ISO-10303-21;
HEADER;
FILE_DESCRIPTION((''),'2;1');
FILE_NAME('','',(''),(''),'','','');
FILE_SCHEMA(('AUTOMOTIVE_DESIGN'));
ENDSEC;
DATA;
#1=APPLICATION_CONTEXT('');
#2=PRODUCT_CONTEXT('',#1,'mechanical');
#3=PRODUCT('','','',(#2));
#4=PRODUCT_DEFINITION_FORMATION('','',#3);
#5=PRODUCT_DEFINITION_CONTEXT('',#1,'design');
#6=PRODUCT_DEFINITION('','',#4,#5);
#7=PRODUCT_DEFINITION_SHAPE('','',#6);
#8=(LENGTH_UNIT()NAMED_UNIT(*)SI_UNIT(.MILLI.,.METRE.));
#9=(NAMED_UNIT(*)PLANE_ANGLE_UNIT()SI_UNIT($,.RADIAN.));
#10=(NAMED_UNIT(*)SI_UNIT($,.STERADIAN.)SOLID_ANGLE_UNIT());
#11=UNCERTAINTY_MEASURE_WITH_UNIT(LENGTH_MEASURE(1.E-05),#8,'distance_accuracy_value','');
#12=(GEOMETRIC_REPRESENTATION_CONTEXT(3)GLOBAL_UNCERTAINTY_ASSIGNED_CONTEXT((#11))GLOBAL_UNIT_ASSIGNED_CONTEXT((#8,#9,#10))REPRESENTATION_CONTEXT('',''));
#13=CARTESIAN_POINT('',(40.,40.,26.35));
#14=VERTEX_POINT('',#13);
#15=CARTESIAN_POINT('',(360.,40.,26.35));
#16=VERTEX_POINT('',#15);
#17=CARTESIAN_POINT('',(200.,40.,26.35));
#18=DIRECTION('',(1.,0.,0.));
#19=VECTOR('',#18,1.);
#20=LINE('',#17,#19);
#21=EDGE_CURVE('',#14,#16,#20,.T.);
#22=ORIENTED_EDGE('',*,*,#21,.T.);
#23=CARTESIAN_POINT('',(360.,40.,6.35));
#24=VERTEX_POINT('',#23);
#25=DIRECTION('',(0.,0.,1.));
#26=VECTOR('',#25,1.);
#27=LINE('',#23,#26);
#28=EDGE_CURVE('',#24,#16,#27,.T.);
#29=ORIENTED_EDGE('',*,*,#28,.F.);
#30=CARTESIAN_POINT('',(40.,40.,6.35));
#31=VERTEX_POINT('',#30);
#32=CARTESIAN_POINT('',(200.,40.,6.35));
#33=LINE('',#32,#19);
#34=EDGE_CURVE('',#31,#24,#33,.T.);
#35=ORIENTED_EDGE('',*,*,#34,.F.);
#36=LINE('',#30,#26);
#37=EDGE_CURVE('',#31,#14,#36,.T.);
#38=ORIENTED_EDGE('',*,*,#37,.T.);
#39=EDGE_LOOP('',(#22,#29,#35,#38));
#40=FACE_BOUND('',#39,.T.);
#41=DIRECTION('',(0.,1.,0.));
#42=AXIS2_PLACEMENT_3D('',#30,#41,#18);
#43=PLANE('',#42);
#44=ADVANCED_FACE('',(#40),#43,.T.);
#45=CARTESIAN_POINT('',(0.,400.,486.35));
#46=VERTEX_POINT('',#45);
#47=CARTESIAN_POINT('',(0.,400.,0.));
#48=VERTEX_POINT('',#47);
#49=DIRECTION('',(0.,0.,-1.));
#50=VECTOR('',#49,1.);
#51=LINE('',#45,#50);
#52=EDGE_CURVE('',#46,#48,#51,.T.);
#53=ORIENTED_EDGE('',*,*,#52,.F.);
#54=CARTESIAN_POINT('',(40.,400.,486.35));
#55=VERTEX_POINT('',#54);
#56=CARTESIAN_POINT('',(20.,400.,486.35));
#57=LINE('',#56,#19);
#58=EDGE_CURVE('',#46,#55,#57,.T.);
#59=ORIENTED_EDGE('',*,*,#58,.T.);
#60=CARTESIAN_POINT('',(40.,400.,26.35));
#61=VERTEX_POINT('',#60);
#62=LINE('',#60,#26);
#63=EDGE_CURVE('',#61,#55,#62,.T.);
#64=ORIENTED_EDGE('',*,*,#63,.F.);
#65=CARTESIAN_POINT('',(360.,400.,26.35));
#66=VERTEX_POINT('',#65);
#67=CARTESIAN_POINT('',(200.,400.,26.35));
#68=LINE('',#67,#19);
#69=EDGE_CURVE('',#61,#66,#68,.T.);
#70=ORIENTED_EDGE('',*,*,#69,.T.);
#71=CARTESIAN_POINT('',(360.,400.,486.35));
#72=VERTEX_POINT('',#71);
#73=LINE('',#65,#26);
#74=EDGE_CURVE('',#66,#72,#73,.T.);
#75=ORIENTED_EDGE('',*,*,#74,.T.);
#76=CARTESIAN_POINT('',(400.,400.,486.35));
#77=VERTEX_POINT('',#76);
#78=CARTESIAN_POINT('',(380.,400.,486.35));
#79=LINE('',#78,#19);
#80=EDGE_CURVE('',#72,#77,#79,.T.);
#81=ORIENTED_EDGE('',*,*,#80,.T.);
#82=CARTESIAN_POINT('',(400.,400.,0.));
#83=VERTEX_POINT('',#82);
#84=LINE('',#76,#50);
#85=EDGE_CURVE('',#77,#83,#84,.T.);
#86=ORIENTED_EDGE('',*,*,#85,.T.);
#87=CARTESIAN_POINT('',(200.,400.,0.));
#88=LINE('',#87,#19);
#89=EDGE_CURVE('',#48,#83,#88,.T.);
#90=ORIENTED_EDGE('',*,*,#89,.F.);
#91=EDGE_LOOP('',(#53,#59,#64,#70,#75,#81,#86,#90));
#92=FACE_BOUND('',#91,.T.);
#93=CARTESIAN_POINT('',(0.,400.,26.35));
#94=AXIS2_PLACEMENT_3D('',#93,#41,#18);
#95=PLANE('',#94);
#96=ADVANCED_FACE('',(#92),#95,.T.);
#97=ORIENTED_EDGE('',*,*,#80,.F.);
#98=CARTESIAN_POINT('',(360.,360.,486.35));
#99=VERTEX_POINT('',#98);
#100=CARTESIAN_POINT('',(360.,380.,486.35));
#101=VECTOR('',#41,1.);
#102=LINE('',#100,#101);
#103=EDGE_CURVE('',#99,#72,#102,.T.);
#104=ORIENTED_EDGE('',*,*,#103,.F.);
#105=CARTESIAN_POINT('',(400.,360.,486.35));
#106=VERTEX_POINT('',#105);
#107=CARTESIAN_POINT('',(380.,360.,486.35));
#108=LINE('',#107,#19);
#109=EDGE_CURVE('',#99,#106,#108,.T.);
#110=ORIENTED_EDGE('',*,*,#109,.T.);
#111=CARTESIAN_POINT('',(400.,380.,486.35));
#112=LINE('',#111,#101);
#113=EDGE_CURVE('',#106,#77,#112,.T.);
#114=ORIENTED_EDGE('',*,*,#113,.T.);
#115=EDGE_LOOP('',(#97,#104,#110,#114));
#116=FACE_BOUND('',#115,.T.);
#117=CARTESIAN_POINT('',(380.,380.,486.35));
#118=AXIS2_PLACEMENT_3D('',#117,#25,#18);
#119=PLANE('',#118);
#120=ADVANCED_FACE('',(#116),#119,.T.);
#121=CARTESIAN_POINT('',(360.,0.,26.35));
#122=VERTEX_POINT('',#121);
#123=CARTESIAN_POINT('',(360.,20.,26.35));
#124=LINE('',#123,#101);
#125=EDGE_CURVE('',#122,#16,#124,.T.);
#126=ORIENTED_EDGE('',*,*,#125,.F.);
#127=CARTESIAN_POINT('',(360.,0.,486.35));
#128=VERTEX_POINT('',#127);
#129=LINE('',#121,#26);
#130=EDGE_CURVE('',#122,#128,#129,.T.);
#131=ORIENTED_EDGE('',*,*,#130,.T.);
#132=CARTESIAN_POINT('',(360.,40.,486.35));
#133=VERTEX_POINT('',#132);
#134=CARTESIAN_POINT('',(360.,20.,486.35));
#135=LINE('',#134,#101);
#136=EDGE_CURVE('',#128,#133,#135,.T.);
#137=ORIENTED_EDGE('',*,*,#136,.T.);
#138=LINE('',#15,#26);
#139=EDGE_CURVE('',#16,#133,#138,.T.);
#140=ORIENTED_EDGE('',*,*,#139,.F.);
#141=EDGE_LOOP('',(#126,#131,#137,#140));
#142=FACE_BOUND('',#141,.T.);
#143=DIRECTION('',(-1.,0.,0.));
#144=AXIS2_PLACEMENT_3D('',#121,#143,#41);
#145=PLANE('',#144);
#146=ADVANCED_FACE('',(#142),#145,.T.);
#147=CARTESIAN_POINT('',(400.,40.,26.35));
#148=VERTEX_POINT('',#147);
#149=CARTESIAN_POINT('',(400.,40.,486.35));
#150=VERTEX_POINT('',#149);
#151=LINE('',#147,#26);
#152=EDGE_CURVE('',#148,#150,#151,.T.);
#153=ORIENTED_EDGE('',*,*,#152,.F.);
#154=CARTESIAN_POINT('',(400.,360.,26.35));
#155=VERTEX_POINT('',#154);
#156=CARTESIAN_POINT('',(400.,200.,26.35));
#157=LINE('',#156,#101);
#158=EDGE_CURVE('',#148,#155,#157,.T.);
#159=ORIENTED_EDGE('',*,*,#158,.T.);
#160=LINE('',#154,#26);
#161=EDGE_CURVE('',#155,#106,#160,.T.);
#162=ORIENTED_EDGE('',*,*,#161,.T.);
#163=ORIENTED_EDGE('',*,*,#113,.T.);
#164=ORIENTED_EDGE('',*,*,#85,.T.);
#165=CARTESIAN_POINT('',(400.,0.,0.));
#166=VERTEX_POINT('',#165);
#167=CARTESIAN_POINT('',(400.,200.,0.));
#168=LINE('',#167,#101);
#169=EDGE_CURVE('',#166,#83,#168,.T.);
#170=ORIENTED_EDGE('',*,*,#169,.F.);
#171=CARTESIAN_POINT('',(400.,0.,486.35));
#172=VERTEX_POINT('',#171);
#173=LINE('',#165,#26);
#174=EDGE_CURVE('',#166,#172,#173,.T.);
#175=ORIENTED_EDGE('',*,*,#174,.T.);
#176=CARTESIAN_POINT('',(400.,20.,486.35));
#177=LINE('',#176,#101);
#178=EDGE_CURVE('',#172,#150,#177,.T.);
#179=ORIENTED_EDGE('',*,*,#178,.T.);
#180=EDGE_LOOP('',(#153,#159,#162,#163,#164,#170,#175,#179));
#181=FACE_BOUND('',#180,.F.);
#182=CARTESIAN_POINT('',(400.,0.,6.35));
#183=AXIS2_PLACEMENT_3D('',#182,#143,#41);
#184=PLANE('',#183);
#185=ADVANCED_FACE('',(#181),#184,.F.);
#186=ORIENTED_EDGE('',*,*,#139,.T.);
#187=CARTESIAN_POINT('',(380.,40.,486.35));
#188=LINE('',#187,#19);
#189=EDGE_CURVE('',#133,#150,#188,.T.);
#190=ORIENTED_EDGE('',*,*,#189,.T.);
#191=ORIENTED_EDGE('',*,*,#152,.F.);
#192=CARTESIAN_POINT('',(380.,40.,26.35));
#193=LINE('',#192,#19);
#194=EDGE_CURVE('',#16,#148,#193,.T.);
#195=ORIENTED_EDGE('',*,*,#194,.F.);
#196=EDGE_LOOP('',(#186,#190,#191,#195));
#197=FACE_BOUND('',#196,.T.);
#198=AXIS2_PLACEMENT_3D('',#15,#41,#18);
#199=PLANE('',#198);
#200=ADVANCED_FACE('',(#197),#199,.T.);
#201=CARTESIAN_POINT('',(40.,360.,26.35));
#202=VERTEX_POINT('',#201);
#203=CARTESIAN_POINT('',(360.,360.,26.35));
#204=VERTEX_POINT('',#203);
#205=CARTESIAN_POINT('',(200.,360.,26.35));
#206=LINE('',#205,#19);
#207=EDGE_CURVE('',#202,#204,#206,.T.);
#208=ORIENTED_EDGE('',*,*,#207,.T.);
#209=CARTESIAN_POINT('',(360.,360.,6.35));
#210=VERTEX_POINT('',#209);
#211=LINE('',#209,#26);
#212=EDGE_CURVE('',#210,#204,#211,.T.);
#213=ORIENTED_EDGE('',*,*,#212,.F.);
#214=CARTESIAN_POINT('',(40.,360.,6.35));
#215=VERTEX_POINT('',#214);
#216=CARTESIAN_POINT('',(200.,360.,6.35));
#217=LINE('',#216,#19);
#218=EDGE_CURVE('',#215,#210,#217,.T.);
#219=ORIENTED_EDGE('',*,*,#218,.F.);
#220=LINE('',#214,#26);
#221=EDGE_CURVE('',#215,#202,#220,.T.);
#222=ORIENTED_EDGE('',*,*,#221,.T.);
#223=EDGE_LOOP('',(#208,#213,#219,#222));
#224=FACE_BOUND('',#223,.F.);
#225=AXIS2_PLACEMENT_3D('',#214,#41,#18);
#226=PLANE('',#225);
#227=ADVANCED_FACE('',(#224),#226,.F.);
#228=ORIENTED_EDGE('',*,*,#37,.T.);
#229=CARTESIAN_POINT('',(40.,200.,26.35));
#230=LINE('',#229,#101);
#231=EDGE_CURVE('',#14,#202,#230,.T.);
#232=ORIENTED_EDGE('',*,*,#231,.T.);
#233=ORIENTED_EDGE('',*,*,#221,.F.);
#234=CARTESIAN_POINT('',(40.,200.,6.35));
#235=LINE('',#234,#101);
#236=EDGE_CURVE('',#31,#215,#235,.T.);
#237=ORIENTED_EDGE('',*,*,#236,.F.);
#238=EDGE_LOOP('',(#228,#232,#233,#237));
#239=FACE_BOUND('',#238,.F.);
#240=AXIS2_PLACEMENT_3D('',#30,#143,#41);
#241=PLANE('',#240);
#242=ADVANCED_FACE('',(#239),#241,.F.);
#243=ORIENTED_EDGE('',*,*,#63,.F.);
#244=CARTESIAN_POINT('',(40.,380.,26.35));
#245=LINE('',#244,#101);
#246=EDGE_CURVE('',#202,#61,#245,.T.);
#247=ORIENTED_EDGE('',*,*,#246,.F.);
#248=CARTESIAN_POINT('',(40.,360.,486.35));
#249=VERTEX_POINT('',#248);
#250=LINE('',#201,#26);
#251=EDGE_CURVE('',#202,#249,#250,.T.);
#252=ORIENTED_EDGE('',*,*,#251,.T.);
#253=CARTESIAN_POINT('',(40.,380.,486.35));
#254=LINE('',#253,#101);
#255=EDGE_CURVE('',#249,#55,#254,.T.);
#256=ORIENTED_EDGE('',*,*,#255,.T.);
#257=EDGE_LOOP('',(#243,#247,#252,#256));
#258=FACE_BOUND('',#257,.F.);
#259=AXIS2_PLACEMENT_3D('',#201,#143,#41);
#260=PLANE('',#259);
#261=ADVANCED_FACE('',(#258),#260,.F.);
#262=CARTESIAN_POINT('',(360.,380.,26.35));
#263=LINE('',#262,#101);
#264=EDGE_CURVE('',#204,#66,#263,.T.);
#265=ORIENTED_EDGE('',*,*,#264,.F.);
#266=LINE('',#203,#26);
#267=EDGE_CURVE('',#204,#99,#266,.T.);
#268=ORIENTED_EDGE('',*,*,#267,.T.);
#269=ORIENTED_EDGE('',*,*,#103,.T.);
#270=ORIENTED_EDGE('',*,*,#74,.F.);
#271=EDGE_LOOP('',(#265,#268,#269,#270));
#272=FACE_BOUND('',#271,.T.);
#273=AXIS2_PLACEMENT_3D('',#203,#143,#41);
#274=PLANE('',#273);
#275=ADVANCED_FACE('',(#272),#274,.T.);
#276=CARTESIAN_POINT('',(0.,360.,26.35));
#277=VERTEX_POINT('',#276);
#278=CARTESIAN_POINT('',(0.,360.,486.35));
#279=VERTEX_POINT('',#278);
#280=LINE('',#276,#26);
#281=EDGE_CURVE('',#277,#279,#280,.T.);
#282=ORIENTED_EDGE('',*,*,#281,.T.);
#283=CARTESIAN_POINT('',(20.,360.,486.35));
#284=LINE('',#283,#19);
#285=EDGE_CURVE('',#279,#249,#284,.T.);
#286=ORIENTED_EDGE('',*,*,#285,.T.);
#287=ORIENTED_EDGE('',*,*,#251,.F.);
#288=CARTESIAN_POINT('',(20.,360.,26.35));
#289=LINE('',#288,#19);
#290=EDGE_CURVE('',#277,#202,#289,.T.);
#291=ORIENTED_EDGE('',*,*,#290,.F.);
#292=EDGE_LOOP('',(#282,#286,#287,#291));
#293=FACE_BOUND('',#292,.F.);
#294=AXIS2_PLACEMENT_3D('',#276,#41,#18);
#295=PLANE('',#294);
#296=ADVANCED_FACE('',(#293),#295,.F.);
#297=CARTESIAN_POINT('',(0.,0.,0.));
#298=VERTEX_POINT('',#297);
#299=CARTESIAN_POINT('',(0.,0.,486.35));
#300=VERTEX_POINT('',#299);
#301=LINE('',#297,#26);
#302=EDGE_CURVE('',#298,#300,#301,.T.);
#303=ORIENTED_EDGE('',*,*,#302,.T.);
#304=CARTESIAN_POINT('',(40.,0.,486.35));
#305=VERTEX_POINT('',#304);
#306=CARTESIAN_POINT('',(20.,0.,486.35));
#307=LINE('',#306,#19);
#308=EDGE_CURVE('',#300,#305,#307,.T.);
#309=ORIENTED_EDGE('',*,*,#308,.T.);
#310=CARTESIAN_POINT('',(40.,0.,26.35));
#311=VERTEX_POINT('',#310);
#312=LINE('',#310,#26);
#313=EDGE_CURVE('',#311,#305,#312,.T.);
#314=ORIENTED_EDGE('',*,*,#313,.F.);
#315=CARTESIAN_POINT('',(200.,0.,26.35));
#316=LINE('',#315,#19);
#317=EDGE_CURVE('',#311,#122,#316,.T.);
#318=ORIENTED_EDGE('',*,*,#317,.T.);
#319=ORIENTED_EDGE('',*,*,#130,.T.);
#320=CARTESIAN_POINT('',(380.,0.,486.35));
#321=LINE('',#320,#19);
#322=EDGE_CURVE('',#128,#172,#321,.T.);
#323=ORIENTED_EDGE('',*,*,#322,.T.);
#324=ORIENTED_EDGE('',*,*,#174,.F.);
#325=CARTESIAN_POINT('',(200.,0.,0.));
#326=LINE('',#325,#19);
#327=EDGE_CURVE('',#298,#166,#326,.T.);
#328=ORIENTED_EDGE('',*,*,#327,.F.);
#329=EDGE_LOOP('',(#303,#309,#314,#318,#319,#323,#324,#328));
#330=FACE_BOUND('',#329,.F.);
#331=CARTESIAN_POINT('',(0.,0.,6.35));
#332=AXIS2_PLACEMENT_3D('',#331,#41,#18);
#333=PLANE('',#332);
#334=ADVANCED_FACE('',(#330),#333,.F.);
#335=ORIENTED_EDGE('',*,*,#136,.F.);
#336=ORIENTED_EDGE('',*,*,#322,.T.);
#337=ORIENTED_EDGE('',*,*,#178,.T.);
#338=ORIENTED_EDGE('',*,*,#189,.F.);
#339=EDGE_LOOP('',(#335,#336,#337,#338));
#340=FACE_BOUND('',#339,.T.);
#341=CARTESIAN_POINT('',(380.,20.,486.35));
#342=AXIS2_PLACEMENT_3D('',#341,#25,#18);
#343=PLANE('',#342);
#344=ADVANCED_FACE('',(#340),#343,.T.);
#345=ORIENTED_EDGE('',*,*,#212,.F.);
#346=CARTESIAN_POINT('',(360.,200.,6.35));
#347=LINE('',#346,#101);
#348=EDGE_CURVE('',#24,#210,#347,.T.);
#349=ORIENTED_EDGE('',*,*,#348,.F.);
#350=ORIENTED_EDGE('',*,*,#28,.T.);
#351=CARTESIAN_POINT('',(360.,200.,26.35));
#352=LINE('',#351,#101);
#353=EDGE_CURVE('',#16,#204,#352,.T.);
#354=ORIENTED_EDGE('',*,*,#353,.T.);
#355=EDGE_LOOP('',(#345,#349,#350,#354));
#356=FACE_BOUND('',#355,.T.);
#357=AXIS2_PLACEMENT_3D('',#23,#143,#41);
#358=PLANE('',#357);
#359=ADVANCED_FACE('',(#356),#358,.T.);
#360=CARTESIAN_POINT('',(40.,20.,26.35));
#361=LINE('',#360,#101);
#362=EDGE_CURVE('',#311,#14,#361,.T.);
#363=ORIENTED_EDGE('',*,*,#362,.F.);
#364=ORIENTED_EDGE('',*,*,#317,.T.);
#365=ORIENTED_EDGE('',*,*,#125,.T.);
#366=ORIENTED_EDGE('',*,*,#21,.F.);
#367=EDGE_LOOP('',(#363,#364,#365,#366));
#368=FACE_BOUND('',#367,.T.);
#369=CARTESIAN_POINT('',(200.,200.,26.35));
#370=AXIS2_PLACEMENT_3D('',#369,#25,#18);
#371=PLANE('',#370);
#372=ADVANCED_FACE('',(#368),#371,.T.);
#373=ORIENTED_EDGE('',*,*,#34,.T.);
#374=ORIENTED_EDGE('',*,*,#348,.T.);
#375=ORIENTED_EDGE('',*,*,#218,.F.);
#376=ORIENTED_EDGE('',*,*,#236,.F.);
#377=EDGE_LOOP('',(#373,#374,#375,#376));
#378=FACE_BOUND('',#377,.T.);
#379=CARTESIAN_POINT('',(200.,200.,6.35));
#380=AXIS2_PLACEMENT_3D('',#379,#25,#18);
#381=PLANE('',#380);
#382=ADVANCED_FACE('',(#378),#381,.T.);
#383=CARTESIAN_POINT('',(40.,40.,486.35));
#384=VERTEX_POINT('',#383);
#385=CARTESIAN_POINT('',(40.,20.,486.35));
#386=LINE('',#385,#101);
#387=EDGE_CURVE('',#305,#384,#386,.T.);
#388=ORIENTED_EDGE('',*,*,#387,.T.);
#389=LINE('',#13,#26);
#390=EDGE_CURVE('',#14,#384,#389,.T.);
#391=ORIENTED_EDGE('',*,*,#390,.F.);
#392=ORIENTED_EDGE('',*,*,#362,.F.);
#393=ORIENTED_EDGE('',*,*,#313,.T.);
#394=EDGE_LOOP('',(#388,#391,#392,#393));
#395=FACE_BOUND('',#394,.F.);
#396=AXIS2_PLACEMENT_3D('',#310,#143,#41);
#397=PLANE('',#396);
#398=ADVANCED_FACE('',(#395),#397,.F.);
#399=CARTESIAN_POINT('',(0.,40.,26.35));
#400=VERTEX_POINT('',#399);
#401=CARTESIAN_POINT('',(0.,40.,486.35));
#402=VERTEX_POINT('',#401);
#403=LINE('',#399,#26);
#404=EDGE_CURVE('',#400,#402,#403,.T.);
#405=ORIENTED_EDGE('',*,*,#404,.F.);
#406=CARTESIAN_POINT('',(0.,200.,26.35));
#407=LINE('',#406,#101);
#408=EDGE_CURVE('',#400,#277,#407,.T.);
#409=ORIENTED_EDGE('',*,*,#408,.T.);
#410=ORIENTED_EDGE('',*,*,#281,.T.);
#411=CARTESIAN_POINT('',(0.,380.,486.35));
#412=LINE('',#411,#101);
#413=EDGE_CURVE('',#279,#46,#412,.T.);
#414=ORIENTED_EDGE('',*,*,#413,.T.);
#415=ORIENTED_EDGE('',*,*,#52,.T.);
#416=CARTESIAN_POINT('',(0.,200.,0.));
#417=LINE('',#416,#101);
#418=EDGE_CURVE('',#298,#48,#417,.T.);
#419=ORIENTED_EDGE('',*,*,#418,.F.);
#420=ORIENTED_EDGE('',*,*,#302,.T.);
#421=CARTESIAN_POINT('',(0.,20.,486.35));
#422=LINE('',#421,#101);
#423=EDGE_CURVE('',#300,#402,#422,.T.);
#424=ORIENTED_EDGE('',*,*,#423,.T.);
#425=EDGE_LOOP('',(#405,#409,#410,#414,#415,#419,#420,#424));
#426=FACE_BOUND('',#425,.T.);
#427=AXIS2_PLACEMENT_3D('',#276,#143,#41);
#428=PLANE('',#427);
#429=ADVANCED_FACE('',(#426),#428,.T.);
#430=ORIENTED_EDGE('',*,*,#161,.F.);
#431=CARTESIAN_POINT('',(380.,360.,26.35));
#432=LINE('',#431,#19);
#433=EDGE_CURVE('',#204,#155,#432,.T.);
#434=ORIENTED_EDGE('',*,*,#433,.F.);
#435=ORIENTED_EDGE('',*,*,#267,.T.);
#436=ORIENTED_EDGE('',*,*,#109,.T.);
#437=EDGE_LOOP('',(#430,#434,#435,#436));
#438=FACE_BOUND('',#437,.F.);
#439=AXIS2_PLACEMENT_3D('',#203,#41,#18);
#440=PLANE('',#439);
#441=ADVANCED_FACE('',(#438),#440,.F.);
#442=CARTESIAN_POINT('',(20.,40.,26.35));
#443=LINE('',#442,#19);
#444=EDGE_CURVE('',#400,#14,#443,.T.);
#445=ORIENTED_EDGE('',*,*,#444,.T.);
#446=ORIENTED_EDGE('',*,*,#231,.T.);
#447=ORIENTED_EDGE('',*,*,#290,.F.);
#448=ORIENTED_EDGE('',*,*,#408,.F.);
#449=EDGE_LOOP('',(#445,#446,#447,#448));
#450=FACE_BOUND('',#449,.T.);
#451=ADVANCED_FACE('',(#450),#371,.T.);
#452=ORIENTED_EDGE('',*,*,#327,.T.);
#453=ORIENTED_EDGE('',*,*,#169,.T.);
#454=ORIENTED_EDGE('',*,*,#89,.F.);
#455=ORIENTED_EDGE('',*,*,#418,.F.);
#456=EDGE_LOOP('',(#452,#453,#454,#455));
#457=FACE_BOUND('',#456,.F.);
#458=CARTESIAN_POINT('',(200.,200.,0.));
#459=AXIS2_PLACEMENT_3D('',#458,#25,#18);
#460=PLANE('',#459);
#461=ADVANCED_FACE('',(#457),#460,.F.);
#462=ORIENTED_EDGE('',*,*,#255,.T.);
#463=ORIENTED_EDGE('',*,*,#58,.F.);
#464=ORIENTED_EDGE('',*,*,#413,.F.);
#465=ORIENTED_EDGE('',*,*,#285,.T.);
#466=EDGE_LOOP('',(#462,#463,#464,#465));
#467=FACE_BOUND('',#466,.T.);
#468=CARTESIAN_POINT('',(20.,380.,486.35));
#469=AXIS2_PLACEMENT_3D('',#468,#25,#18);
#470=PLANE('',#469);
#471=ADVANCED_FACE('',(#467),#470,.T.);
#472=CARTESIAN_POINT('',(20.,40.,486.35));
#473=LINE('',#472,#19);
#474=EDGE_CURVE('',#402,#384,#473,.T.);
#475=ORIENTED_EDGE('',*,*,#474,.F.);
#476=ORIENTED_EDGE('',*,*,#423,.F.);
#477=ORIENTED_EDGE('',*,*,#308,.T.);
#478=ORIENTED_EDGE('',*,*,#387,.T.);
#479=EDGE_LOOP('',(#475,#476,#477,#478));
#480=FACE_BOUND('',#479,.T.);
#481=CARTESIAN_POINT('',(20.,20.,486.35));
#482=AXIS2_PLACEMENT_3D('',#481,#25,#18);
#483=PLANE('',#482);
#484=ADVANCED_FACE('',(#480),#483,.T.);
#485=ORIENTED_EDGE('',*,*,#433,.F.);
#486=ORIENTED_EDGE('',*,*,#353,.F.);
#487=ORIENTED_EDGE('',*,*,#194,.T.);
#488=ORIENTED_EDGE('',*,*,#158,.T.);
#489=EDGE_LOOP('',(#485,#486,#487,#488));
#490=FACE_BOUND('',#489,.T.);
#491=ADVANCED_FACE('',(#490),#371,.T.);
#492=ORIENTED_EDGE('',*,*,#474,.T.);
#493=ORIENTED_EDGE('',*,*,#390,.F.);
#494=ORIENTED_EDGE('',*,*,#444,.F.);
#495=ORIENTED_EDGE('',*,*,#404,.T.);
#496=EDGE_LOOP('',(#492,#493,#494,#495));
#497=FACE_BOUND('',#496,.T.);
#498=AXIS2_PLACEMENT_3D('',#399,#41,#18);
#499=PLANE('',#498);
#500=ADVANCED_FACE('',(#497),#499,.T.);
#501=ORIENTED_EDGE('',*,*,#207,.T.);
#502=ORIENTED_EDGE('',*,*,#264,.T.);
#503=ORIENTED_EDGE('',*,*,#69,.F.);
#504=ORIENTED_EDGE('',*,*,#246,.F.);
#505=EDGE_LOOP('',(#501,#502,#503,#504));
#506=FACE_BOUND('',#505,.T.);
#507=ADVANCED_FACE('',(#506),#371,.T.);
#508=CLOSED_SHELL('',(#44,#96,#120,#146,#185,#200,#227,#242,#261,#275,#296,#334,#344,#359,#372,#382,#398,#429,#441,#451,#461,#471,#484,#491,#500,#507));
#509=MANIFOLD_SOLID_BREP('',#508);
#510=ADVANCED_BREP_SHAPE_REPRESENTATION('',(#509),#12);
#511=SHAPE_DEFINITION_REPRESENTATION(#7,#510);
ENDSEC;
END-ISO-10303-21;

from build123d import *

# Parameters (mm, degrees)
F0_W     = 400
F0_H     = 400
F1_DEPTH = 6.35
F2_W     = 400
F2_H     = 400
F2_W_2   = 320
F2_H_2   = 320
F3_DEPTH = 20
F4_W     = 40
F4_H     = 40
F5_DEPTH = 460


# Not quite as in the source:
# - a length typed as a fraction of an inch, garbled in the dataset ("3 / 203.2 mm" for 3/8 in), is restored


with BuildPart() as f1:
    # F0 (on Top) → F1 (new body)
    with BuildSketch(Plane.XY):
        with Locations((200, 200)):
            Rectangle(F0_W, F0_H)
    extrude(amount=F1_DEPTH)

    # F2 (on face) → F3 (join)
    with BuildSketch(Plane.XY.offset(6.35)):
        with Locations((200, 200)):
            Rectangle(F2_W, F2_H)
        with Locations((200, 200)):
            Rectangle(F2_W_2, F2_H_2, mode=Mode.SUBTRACT)
    extrude(amount=F3_DEPTH)

    # F4 (on face) → F5 (join)
    with BuildSketch(Plane.XY.offset(26.35)):
        with Locations((20, 380)):
            Rectangle(F4_W, F4_H)
        with Locations((380, 380)):
            Rectangle(F4_W, F4_H)
        with Locations((380, 20)):
            Rectangle(F4_W, F4_H)
        with Locations((20, 20)):
            Rectangle(F4_W, F4_H)
    extrude(amount=F5_DEPTH)


solid = f1.part
